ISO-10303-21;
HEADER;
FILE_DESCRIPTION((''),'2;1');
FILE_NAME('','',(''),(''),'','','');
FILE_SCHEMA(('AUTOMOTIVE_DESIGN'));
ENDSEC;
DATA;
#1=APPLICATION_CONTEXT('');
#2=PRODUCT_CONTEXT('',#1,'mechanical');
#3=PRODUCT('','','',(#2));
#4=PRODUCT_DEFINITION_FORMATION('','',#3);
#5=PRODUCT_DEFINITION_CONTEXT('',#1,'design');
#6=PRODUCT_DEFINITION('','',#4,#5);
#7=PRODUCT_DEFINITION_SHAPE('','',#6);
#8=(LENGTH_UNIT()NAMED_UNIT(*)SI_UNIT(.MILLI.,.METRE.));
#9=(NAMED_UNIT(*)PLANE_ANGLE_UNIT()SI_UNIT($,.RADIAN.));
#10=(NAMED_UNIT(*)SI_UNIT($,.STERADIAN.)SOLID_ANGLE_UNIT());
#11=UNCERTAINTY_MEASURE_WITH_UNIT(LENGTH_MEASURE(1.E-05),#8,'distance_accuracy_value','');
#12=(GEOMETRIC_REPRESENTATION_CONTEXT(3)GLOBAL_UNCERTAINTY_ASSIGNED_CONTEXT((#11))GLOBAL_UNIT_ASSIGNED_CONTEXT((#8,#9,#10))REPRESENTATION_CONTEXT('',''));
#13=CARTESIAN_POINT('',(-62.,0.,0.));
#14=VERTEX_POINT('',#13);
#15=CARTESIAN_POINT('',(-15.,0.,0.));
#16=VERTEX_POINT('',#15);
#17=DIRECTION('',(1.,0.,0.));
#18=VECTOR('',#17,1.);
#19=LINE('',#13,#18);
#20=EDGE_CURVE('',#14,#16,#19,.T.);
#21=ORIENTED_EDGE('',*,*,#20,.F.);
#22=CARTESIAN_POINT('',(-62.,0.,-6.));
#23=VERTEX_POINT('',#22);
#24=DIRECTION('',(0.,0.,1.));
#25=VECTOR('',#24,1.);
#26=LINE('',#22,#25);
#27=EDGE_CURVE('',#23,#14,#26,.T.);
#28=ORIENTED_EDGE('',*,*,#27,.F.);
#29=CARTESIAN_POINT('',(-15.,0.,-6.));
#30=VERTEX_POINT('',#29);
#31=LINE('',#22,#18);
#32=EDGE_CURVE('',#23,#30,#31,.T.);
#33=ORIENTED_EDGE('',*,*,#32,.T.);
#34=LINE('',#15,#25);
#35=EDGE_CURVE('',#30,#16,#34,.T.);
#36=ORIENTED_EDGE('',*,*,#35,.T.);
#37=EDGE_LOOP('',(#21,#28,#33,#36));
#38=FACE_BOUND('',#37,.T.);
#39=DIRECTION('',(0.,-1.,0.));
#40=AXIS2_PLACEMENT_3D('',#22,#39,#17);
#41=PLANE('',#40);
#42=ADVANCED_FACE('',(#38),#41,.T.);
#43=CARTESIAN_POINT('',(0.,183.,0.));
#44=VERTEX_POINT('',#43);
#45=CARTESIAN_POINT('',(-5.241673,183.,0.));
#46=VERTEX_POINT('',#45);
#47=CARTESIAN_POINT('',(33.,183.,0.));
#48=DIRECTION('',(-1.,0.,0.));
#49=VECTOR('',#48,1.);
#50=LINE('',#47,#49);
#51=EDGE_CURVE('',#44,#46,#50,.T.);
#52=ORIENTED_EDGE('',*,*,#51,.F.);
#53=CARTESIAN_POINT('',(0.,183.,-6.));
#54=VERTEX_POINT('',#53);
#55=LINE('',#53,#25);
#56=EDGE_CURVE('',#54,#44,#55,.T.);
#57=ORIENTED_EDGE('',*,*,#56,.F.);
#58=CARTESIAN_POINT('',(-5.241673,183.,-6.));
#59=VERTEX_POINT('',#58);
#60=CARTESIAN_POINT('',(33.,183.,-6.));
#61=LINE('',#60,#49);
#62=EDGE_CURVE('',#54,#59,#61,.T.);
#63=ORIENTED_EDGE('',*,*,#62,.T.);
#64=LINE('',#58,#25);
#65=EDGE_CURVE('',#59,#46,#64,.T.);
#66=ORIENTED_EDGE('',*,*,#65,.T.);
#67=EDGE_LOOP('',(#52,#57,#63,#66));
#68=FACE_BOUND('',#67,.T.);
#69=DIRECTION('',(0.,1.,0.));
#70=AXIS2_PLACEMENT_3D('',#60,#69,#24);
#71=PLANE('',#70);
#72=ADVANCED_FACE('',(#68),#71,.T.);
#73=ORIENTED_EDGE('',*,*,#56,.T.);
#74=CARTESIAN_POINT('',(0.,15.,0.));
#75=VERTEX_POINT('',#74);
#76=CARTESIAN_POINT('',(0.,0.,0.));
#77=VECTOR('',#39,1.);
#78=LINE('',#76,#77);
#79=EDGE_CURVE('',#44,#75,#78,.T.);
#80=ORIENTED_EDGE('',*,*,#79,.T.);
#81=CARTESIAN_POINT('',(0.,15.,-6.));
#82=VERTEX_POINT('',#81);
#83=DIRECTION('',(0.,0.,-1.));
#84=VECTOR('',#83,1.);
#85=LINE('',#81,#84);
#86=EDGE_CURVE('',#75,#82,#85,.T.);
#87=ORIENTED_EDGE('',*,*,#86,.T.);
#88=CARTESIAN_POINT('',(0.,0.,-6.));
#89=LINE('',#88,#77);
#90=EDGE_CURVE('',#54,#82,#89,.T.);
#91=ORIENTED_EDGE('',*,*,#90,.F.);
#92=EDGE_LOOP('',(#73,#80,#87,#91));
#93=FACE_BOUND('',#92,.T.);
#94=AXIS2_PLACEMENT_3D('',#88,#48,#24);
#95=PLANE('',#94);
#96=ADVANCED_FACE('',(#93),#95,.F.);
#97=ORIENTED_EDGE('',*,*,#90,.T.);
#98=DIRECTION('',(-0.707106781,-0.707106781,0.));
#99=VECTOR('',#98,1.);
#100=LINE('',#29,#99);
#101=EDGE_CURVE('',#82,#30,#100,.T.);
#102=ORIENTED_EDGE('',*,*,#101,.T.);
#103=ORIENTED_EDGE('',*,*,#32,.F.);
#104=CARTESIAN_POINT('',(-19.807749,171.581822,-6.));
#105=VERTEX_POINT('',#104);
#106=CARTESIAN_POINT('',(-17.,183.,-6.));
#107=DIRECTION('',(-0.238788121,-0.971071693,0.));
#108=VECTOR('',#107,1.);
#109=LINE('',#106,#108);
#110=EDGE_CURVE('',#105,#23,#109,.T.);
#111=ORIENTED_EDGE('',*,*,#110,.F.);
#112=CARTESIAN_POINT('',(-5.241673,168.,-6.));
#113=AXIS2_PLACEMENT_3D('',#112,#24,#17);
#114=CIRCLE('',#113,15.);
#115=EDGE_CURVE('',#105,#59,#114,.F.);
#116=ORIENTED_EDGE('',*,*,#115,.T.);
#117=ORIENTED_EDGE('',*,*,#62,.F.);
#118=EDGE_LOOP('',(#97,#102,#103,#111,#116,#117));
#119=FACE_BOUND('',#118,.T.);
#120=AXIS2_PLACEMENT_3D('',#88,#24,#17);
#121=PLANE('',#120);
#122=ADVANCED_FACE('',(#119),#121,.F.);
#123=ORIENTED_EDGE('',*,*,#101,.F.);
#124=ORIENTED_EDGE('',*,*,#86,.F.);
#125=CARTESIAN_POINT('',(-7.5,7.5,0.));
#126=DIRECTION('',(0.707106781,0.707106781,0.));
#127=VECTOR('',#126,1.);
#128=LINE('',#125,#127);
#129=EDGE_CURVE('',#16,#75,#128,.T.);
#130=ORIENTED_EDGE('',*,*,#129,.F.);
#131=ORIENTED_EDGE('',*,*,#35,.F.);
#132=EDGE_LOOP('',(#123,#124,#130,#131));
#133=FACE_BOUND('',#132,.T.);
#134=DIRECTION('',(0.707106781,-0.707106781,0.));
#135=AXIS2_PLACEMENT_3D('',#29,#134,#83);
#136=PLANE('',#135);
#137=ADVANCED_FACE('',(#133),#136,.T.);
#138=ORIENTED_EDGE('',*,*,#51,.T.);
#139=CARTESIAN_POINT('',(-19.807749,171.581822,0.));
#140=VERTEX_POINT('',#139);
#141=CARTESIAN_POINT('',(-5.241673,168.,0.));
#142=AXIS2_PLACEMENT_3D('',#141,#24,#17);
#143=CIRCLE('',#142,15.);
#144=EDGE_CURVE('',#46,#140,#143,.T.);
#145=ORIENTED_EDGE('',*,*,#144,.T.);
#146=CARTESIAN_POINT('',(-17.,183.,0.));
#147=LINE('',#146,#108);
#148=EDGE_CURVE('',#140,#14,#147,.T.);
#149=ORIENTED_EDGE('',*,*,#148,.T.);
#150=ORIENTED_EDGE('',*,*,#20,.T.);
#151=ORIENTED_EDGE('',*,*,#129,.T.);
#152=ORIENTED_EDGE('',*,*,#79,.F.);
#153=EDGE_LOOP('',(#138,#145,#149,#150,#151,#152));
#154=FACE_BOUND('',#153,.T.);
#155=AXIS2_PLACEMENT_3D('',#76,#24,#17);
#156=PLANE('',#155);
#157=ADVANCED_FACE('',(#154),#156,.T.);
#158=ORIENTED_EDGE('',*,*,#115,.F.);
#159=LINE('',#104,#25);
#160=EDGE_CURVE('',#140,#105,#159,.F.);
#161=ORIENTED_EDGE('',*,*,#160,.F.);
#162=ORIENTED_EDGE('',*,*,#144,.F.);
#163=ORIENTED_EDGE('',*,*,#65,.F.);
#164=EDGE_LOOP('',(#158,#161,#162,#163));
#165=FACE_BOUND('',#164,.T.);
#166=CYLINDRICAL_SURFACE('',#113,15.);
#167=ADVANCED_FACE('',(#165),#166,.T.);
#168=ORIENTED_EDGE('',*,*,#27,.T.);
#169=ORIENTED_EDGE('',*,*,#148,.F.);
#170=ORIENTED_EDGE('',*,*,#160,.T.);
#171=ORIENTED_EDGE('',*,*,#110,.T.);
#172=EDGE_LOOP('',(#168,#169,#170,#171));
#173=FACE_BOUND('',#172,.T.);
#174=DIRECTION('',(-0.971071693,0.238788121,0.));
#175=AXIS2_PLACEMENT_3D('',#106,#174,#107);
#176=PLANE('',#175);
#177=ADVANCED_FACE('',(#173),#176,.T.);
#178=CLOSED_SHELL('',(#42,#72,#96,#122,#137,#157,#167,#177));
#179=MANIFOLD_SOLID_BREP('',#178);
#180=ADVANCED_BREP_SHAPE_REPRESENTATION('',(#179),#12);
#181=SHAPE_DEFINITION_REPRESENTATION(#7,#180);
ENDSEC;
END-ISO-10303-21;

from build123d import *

# Parameters (mm, degrees)
SM_BASE_FLANGE_1_DEPTH   = 6
FILLET_1_R               = 15
CUT_EXTRUDE_1_DEPTH      = 200.020099487
CUT_EXTRUDE_1_DEPTH_BACK = 200.020099487
SKETCH_4_W               = 94.166763327
SKETCH_4_H               = 540.193326504
CHAMFER_1_SIZE           = 15


# Sheet-metal steps are written as plain solids
with BuildPart() as part:
    # Sketch 2 → Базовая кромка1 (new body)
    with BuildSketch(Plane.XY):
        Polygon((-62, 0), (78, 0), (33, 183), (-17, 183), align=None)
    extrude(amount=-SM_BASE_FLANGE_1_DEPTH)

    # Скругление1
    fillet_1_edges = [part.edges().sort_by_distance(p)[0] for p in [
        (-17, 183, -3),
        (33, 183, -3),
    ]]
    fillet(fillet_1_edges, radius=FILLET_1_R)

    # Эскиз4 → Вырез-Вытянуть1 (cut, two sides: drawn at the far end of the back side and taken through both)
    with BuildSketch(Plane.XY.offset(-CUT_EXTRUDE_1_DEPTH_BACK)):
        with Locations((47.083381664, 270.096663252)):
            Rectangle(SKETCH_4_W, SKETCH_4_H)
    extrude(amount=CUT_EXTRUDE_1_DEPTH + CUT_EXTRUDE_1_DEPTH_BACK, mode=Mode.SUBTRACT)

    # Фаска1
    chamfer_1_edges = [part.edges().sort_by_distance(p)[0] for p in [
        (0, 0, -3),
    ]]
    chamfer(chamfer_1_edges, length=CHAMFER_1_SIZE)


solid = part.part
